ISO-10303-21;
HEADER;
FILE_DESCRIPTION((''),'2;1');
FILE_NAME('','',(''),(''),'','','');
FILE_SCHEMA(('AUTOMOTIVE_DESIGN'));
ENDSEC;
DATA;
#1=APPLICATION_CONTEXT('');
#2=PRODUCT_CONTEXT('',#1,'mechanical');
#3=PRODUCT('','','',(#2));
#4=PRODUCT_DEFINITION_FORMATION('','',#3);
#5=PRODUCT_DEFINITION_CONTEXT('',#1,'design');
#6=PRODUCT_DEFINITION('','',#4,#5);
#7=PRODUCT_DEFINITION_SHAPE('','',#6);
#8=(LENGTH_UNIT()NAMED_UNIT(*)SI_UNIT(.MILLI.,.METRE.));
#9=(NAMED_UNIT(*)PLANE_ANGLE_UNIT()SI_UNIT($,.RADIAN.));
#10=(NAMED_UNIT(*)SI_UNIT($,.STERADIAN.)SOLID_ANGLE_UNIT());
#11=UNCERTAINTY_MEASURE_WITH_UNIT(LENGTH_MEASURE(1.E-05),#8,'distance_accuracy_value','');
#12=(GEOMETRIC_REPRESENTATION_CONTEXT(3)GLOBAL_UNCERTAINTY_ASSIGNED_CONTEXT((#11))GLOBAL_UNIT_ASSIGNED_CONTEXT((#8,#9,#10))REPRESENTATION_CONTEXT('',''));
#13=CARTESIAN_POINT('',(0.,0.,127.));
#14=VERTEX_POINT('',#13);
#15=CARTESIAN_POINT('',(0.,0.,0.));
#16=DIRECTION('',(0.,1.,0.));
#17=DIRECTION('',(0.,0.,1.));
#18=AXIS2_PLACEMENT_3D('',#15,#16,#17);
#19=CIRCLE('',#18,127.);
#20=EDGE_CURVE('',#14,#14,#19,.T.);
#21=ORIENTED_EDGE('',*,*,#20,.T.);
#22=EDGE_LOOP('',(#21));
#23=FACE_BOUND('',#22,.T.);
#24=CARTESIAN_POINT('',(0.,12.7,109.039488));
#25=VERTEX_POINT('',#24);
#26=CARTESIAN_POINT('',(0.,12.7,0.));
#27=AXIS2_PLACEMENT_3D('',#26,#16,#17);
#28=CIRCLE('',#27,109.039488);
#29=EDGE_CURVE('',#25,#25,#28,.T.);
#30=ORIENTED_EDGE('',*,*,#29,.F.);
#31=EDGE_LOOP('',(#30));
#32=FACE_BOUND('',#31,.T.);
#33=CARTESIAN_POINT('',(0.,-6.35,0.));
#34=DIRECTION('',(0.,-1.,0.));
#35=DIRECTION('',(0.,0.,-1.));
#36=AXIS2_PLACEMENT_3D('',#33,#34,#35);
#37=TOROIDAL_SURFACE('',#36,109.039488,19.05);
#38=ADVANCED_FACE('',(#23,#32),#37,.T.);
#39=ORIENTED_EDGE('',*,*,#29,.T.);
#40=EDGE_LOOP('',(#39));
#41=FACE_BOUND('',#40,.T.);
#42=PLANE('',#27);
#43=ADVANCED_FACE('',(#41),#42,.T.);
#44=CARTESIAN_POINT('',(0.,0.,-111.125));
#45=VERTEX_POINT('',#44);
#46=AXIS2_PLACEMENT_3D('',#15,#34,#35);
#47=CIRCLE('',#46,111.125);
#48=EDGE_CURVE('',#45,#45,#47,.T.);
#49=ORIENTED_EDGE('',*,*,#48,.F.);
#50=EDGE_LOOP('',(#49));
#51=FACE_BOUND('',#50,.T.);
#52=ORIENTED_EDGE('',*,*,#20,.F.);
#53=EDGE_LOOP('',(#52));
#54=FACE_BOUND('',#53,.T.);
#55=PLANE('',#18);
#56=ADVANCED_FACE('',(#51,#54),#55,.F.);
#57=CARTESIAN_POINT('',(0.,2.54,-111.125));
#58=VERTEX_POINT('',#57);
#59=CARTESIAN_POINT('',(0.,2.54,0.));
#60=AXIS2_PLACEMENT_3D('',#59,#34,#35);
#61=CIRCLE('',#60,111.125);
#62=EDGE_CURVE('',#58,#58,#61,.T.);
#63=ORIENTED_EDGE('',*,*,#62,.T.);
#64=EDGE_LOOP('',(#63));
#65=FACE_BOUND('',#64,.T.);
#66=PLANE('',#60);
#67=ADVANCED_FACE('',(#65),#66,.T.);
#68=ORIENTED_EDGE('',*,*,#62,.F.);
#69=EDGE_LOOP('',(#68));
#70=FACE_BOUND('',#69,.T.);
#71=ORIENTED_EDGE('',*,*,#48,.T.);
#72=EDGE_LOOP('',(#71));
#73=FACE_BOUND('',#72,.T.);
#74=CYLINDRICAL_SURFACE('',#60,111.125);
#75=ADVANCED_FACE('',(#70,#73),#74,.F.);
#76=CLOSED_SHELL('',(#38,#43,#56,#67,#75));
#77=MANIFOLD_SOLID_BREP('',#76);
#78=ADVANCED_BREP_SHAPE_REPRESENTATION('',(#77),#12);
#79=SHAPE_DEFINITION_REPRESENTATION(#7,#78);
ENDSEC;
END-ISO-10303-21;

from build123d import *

# Parameters (mm, degrees)
SKETCH2_R           = 127
BOSS_EXTRUDE1_DEPTH = 12.7
FILLET1_R           = 19.05
SKETCH3_R           = 111.125
CUT_EXTRUDE1_DEPTH  = 2.54


with BuildPart() as part:
    # Sketch2 → Boss-Extrude1 (new body)
    with BuildSketch(Plane(origin=(0, 0, 0), x_dir=(1, 0, 0), z_dir=(0, 1, 0))):
        with Locations(Location((0, 0, 0), (0, 0, 270))):
            Circle(SKETCH2_R)
    extrude(amount=BOSS_EXTRUDE1_DEPTH)

    # Fillet1
    # the kernel refuses this fillet: 19.05 mm, written as the material it takes off along each edge
    with BuildSketch(Plane(origin=(0, 12.7, 0), x_dir=(0, 0, 1), z_dir=(-1, 0, 0))) as fillet1_piece_1:
        with BuildLine():
            CenterArc((109.039487758, -19.05), FILLET1_R, 19.471220634, 70.528779366)
            Line((109.039487758, 0), (109.039487758, 0.381))
            Line((109.039487758, 0.381), (127, 0.381))
            Line((127, 0.381), (127.381, 0))
            ThreePointArc((127.381, 0), (127.381, -6.35), (127.359210245, -12.573))
            Line((127.359210245, -12.573), (127, -12.7))
        make_face()
    revolve(axis=Axis((0, 12.7, 0), (0, 1, 0)), mode=Mode.SUBTRACT)

    # Sketch3 → Cut-Extrude1 (cut)
    with BuildSketch(Plane.XZ):
        with Locations(Location((0, 0, 0), (0, 0, 270))):
            Circle(SKETCH3_R)
    extrude(amount=-CUT_EXTRUDE1_DEPTH, mode=Mode.SUBTRACT)


solid = part.part
